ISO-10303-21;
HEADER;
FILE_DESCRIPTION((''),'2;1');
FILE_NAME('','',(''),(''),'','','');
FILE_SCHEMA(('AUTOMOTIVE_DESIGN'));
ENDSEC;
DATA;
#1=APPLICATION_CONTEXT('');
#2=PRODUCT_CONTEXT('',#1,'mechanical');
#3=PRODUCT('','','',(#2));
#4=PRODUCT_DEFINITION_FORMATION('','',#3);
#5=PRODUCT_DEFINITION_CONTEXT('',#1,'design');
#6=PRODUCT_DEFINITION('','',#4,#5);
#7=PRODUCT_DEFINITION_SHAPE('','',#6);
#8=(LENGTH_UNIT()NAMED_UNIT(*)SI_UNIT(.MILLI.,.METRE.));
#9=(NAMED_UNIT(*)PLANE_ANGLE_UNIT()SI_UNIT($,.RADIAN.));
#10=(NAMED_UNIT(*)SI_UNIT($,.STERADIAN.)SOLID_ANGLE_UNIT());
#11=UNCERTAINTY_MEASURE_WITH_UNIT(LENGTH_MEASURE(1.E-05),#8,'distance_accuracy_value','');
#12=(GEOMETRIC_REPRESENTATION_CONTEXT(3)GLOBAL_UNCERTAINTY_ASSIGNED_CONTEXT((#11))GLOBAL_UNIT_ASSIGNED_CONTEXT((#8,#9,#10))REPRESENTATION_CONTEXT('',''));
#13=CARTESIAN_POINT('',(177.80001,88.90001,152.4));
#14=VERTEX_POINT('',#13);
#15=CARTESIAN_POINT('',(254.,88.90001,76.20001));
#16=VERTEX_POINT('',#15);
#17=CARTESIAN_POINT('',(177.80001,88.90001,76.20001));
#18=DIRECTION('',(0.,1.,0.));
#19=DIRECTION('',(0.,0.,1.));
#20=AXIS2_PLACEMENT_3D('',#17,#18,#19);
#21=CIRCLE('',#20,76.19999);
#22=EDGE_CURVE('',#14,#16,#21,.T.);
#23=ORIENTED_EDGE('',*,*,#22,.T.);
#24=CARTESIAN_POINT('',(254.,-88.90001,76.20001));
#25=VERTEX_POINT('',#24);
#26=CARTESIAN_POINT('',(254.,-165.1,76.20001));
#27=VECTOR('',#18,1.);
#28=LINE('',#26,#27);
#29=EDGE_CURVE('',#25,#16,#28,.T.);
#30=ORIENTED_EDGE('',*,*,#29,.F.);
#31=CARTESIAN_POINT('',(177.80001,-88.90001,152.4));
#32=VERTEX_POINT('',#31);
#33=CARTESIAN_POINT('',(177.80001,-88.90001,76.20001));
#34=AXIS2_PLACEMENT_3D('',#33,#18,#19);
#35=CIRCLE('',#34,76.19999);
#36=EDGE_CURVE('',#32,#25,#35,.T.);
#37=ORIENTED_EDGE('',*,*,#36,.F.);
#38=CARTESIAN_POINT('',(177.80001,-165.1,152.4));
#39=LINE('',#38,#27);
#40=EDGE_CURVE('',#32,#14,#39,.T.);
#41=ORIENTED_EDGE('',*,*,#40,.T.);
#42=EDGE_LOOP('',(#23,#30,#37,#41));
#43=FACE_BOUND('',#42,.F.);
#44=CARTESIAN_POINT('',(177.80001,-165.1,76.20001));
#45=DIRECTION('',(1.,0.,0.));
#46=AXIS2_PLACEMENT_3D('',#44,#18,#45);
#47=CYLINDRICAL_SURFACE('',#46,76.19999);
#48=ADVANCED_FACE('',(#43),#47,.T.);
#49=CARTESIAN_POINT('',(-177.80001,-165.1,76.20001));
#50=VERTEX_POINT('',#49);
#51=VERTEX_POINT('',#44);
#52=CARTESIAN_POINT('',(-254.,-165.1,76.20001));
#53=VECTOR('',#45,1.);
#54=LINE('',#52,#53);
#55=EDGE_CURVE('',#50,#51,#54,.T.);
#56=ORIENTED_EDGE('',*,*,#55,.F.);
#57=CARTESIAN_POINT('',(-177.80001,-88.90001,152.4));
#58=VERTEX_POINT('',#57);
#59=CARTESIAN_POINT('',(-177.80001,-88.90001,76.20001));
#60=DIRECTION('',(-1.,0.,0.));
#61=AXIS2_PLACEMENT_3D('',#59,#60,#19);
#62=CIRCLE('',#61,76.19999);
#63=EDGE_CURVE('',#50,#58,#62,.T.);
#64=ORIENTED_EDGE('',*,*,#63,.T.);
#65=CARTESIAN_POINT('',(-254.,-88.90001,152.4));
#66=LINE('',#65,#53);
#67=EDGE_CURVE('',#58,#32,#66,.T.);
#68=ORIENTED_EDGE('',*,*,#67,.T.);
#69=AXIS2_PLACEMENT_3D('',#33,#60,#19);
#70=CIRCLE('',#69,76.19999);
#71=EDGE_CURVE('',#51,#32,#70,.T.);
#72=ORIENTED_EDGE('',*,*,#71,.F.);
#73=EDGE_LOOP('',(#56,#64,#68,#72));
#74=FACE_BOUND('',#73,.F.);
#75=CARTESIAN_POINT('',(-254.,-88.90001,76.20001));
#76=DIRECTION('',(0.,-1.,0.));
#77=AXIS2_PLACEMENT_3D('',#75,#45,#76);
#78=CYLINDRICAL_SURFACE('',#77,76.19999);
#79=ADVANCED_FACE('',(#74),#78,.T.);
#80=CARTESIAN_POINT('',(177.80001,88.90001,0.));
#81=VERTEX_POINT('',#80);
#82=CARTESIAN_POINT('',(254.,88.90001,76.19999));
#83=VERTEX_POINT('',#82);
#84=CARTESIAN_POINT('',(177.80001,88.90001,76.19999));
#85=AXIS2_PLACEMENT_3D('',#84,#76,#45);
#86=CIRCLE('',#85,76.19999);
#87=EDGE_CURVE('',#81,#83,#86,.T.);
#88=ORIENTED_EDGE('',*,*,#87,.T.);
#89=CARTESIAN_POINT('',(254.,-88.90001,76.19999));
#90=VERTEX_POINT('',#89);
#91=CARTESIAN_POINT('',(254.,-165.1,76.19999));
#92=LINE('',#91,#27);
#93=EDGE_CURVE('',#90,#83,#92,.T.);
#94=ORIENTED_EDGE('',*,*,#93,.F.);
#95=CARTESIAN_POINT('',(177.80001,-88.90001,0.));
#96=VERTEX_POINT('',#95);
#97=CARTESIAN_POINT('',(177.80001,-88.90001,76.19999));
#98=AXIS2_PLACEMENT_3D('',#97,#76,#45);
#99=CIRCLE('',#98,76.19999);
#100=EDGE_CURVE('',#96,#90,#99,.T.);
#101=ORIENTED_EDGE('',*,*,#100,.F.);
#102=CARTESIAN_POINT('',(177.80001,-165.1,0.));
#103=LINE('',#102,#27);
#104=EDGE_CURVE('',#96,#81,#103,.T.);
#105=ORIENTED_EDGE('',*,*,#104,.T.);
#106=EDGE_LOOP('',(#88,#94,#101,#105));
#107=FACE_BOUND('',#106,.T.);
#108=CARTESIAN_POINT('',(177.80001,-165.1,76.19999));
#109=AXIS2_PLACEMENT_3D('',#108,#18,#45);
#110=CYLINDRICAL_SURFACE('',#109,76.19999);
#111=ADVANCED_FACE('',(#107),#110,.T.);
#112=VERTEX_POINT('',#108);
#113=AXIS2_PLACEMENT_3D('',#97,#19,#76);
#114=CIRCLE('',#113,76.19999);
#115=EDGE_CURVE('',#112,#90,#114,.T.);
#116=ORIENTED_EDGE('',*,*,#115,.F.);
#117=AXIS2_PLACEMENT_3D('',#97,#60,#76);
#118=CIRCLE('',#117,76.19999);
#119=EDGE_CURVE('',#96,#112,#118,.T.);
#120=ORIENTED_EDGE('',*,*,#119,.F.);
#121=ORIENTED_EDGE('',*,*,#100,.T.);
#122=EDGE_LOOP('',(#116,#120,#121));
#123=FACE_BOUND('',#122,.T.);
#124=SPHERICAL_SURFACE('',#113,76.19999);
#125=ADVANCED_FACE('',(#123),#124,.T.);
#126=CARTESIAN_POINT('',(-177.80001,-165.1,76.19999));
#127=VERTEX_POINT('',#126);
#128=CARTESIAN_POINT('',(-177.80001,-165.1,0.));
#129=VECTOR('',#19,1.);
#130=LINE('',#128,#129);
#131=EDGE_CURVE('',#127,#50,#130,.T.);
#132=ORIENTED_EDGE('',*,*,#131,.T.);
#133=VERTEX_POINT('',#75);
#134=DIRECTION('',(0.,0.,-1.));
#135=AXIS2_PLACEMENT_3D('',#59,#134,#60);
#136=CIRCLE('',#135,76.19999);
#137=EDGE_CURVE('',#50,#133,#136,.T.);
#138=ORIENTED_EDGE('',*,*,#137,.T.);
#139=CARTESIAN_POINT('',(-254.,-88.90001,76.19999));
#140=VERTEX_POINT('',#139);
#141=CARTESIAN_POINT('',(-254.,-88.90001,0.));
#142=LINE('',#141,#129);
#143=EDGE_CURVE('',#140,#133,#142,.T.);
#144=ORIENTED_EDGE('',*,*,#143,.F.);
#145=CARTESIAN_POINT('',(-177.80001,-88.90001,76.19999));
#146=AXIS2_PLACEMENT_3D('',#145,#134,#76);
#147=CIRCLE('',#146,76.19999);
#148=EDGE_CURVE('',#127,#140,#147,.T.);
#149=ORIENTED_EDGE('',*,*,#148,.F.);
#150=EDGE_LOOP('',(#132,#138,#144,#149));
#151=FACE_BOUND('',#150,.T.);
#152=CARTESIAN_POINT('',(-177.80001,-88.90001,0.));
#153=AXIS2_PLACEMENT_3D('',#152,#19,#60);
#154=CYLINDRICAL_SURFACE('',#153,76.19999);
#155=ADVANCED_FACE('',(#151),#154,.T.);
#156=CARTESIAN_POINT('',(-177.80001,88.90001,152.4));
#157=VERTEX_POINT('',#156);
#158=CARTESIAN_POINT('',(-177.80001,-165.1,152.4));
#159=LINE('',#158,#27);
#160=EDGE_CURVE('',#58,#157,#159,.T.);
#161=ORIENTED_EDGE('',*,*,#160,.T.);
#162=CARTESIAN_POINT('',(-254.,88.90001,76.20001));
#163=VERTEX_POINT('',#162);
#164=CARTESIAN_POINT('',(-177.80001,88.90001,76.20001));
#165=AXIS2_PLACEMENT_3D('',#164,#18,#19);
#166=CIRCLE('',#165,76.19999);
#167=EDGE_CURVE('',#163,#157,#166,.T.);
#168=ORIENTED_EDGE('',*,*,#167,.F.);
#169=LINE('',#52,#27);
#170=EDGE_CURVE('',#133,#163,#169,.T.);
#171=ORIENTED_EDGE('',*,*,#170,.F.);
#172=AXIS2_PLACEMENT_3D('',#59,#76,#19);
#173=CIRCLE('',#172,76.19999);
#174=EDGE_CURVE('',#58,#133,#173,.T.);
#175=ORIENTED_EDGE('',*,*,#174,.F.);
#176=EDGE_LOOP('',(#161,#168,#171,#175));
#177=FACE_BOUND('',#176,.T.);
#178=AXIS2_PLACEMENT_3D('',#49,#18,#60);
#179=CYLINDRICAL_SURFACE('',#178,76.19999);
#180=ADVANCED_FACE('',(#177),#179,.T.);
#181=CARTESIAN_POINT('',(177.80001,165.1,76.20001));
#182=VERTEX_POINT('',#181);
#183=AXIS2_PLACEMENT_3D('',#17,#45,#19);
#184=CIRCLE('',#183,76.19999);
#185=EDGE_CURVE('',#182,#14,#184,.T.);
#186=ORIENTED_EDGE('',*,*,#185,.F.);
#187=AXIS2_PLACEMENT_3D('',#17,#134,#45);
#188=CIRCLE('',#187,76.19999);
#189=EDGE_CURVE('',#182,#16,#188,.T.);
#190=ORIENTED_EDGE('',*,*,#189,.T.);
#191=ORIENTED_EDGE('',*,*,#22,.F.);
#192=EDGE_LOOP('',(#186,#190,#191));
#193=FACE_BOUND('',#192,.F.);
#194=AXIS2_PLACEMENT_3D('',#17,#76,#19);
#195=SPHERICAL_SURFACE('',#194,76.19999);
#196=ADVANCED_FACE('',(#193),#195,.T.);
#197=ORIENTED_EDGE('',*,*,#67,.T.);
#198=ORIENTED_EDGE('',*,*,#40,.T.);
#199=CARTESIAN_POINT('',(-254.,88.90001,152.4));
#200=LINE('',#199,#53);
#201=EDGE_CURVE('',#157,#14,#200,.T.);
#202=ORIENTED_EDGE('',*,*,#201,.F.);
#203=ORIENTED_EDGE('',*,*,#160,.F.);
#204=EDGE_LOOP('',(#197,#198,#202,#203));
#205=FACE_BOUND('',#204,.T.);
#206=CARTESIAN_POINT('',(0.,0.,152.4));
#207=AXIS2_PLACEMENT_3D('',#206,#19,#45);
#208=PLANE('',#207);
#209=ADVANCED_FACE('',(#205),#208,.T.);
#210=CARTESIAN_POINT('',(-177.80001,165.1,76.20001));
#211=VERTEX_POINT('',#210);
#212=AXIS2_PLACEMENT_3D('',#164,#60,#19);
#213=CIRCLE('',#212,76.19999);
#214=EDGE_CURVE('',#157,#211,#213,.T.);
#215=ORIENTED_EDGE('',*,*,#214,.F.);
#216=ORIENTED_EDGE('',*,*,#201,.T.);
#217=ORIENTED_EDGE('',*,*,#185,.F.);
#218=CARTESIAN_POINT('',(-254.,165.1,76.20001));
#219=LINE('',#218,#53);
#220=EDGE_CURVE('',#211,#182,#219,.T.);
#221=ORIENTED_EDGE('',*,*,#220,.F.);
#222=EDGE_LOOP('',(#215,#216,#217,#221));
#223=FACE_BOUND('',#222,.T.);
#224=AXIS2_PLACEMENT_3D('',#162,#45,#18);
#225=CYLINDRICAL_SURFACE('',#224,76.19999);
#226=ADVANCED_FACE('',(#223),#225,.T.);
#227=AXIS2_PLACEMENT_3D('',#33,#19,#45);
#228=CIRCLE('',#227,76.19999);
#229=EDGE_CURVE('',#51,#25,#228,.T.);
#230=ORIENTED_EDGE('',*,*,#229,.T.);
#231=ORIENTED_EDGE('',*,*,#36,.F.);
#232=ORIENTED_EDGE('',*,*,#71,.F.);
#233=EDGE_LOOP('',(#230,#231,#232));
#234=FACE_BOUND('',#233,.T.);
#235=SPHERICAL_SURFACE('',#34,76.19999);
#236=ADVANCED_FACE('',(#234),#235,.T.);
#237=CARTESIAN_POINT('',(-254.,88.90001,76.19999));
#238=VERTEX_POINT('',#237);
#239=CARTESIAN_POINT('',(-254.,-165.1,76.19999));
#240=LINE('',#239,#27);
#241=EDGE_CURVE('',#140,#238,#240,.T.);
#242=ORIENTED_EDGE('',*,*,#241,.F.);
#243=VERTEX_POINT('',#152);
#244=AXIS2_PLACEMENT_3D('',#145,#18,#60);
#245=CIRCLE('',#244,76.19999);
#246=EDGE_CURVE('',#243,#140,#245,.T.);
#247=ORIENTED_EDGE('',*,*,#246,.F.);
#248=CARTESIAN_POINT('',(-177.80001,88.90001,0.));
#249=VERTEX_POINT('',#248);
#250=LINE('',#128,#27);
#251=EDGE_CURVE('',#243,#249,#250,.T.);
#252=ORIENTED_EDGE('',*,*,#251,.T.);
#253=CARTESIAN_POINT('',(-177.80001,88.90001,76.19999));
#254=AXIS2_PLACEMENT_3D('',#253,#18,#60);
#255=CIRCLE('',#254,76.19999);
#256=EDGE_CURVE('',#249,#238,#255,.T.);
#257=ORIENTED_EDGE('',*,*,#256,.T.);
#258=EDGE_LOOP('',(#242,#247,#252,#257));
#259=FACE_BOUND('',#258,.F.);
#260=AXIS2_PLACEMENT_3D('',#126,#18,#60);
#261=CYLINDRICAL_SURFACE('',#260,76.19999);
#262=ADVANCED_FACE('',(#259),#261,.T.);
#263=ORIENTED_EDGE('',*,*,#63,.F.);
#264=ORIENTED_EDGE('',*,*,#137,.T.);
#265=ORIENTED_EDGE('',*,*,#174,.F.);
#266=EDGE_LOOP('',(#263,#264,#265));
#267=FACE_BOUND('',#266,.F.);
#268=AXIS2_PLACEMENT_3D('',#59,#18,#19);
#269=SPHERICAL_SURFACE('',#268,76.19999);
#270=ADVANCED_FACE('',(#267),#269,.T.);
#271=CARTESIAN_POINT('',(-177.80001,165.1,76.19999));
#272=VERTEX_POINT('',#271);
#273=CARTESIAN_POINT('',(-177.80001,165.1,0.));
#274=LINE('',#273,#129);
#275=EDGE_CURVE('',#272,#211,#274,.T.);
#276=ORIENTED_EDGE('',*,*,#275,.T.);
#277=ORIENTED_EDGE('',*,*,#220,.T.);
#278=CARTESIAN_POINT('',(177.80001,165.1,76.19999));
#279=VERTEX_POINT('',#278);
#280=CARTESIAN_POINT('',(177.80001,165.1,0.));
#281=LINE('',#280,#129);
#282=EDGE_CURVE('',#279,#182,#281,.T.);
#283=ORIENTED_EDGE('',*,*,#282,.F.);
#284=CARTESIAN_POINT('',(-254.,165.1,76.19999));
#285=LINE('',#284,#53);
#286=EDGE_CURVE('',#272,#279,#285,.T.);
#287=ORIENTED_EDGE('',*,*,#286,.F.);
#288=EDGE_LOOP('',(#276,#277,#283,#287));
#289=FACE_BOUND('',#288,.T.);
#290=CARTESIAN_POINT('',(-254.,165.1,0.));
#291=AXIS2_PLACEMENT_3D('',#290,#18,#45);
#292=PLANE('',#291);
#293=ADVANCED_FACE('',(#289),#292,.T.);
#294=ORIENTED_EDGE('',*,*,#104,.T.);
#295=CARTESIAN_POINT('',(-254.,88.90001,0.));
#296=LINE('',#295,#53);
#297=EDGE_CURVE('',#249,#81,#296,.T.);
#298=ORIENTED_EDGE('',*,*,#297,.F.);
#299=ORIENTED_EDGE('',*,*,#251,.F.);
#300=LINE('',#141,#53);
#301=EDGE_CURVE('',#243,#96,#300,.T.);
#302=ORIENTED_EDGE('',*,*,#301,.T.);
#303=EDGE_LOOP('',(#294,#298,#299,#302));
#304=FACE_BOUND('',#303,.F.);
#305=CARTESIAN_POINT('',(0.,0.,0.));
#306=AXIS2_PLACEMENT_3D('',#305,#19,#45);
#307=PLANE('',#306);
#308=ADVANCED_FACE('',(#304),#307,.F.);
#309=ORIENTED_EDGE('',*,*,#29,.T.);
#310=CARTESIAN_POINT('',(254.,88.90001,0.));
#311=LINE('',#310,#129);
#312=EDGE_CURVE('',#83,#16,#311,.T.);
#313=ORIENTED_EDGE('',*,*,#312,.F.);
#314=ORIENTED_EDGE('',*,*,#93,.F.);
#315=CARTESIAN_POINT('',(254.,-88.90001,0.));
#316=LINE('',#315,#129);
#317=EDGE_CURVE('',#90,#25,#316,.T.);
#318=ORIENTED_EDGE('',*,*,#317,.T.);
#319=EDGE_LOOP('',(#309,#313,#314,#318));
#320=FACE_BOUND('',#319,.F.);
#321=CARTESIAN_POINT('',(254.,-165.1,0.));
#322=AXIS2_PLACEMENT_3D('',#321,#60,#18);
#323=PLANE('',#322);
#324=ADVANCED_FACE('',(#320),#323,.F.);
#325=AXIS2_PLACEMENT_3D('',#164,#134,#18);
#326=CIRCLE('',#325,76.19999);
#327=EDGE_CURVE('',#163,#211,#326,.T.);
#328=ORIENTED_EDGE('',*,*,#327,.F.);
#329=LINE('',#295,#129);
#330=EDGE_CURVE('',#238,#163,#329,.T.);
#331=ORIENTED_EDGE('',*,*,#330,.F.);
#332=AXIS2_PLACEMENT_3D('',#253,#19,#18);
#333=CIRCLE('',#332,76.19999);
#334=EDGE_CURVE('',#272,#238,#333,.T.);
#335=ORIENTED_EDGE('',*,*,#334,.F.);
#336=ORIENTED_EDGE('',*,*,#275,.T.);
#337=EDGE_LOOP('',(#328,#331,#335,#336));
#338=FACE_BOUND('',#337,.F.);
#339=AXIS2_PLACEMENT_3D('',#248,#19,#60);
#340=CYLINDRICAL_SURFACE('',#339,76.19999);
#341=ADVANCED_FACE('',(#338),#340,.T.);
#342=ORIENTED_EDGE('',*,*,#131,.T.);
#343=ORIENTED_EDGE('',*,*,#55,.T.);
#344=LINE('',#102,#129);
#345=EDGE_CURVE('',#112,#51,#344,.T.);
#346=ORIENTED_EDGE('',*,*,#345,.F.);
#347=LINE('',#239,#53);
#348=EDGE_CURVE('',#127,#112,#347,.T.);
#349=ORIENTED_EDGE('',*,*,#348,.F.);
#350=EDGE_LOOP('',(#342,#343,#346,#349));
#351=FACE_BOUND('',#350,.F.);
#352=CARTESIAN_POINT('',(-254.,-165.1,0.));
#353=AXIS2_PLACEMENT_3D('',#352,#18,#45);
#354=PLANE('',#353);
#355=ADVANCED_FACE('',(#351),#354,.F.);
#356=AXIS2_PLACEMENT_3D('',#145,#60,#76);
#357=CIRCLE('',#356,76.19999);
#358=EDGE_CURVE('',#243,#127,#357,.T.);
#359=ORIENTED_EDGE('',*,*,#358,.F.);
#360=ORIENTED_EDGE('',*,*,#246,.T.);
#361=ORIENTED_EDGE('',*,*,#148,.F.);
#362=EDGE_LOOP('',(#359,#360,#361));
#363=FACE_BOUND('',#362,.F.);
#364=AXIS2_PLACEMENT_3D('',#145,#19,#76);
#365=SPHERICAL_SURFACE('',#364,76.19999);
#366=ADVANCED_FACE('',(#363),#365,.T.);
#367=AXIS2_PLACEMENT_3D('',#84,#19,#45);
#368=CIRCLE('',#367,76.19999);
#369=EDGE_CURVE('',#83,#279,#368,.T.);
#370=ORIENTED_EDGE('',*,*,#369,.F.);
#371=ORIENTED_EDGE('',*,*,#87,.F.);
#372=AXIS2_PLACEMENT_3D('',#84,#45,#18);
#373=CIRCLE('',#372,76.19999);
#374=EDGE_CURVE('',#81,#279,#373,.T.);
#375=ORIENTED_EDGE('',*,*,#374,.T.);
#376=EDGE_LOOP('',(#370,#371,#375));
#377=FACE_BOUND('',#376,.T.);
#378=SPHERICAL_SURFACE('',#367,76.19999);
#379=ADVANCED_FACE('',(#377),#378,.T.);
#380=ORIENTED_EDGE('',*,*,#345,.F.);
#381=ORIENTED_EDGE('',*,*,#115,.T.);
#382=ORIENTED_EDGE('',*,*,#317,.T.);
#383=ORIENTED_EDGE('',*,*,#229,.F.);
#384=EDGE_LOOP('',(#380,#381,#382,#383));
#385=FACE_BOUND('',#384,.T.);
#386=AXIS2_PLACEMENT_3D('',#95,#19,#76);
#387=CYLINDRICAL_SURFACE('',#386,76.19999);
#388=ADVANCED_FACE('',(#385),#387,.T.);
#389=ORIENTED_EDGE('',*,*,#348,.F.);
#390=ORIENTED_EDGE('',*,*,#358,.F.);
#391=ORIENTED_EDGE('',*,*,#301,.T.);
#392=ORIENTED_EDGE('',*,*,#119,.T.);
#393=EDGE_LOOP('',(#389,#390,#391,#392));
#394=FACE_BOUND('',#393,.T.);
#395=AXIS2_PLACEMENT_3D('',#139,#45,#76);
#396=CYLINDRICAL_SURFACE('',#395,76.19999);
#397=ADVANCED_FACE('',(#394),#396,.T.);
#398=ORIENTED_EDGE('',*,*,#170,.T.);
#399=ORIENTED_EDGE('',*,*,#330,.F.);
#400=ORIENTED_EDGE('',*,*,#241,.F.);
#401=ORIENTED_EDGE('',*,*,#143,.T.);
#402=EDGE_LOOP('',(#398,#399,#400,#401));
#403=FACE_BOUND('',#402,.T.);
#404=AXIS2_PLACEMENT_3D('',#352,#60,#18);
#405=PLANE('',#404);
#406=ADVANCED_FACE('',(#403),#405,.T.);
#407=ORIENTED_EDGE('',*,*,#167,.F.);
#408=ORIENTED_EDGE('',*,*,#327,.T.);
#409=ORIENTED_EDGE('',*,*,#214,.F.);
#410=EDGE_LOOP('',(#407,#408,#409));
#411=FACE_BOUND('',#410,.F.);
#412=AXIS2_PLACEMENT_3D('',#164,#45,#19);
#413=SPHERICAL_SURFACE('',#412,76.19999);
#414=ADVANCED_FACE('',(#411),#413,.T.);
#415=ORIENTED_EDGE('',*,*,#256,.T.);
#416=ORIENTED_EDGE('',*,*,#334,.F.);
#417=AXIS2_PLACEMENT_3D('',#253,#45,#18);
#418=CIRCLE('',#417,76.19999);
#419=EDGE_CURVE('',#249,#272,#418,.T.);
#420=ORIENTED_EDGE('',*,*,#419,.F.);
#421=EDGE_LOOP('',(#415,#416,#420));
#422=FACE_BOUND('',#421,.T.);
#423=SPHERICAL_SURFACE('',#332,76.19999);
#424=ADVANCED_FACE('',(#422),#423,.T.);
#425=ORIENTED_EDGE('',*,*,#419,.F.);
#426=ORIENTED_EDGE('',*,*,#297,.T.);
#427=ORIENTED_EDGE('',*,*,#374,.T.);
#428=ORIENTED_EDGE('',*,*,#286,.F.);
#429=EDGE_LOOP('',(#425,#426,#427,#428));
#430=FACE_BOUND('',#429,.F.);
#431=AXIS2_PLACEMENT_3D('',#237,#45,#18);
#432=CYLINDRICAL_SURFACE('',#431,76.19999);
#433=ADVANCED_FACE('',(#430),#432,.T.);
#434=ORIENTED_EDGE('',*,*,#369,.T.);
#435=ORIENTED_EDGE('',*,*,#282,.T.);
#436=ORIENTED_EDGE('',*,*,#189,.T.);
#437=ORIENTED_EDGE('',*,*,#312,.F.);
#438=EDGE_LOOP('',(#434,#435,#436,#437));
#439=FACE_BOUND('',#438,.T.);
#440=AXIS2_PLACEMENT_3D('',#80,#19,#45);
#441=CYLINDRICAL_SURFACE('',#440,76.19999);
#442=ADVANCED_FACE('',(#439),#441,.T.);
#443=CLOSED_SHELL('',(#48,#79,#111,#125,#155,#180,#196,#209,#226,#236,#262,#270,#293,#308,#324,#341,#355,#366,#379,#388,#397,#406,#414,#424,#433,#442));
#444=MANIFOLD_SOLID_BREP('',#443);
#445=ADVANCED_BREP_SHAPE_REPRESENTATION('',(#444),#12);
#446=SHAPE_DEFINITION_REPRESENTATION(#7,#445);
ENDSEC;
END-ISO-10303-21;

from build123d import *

# Parameters (mm, degrees)
F0_W     = 508
F0_H     = 330.2
F1_DEPTH = 152.4
F2_R     = 76.19999


# Not quite as in the source:
# - a fillet or chamfer is up to 0.001 mm smaller than in the source, because OpenCascade refuses the exact size


with BuildPart() as f1:
    # F0 (on Top) → F1 (new body)
    with BuildSketch(Plane.XY):
        Rectangle(F0_W, F0_H)
    extrude(amount=F1_DEPTH)

    # F2 (radius 76.2 in the source; OpenCascade refuses exactly that, so slightly less here)
    f2_edges = [f1.edges().sort_by_distance(p)[0] for p in [
        (254, 0, 152.4),
        (0, 165.1, 152.4),
        (-254, 0, 152.4),
        (0, -165.1, 152.4),
        (-254, -165.1, 76.2),
        (254, -165.1, 76.2),
        (0, -165.1, 0),
        (254, 165.1, 76.2),
        (254, 0, 0),
        (-254, 165.1, 76.2),
        (0, 165.1, 0),
        (-254, 0, 0),
    ]]
    fillet(f2_edges, radius=F2_R)


solid = f1.part
